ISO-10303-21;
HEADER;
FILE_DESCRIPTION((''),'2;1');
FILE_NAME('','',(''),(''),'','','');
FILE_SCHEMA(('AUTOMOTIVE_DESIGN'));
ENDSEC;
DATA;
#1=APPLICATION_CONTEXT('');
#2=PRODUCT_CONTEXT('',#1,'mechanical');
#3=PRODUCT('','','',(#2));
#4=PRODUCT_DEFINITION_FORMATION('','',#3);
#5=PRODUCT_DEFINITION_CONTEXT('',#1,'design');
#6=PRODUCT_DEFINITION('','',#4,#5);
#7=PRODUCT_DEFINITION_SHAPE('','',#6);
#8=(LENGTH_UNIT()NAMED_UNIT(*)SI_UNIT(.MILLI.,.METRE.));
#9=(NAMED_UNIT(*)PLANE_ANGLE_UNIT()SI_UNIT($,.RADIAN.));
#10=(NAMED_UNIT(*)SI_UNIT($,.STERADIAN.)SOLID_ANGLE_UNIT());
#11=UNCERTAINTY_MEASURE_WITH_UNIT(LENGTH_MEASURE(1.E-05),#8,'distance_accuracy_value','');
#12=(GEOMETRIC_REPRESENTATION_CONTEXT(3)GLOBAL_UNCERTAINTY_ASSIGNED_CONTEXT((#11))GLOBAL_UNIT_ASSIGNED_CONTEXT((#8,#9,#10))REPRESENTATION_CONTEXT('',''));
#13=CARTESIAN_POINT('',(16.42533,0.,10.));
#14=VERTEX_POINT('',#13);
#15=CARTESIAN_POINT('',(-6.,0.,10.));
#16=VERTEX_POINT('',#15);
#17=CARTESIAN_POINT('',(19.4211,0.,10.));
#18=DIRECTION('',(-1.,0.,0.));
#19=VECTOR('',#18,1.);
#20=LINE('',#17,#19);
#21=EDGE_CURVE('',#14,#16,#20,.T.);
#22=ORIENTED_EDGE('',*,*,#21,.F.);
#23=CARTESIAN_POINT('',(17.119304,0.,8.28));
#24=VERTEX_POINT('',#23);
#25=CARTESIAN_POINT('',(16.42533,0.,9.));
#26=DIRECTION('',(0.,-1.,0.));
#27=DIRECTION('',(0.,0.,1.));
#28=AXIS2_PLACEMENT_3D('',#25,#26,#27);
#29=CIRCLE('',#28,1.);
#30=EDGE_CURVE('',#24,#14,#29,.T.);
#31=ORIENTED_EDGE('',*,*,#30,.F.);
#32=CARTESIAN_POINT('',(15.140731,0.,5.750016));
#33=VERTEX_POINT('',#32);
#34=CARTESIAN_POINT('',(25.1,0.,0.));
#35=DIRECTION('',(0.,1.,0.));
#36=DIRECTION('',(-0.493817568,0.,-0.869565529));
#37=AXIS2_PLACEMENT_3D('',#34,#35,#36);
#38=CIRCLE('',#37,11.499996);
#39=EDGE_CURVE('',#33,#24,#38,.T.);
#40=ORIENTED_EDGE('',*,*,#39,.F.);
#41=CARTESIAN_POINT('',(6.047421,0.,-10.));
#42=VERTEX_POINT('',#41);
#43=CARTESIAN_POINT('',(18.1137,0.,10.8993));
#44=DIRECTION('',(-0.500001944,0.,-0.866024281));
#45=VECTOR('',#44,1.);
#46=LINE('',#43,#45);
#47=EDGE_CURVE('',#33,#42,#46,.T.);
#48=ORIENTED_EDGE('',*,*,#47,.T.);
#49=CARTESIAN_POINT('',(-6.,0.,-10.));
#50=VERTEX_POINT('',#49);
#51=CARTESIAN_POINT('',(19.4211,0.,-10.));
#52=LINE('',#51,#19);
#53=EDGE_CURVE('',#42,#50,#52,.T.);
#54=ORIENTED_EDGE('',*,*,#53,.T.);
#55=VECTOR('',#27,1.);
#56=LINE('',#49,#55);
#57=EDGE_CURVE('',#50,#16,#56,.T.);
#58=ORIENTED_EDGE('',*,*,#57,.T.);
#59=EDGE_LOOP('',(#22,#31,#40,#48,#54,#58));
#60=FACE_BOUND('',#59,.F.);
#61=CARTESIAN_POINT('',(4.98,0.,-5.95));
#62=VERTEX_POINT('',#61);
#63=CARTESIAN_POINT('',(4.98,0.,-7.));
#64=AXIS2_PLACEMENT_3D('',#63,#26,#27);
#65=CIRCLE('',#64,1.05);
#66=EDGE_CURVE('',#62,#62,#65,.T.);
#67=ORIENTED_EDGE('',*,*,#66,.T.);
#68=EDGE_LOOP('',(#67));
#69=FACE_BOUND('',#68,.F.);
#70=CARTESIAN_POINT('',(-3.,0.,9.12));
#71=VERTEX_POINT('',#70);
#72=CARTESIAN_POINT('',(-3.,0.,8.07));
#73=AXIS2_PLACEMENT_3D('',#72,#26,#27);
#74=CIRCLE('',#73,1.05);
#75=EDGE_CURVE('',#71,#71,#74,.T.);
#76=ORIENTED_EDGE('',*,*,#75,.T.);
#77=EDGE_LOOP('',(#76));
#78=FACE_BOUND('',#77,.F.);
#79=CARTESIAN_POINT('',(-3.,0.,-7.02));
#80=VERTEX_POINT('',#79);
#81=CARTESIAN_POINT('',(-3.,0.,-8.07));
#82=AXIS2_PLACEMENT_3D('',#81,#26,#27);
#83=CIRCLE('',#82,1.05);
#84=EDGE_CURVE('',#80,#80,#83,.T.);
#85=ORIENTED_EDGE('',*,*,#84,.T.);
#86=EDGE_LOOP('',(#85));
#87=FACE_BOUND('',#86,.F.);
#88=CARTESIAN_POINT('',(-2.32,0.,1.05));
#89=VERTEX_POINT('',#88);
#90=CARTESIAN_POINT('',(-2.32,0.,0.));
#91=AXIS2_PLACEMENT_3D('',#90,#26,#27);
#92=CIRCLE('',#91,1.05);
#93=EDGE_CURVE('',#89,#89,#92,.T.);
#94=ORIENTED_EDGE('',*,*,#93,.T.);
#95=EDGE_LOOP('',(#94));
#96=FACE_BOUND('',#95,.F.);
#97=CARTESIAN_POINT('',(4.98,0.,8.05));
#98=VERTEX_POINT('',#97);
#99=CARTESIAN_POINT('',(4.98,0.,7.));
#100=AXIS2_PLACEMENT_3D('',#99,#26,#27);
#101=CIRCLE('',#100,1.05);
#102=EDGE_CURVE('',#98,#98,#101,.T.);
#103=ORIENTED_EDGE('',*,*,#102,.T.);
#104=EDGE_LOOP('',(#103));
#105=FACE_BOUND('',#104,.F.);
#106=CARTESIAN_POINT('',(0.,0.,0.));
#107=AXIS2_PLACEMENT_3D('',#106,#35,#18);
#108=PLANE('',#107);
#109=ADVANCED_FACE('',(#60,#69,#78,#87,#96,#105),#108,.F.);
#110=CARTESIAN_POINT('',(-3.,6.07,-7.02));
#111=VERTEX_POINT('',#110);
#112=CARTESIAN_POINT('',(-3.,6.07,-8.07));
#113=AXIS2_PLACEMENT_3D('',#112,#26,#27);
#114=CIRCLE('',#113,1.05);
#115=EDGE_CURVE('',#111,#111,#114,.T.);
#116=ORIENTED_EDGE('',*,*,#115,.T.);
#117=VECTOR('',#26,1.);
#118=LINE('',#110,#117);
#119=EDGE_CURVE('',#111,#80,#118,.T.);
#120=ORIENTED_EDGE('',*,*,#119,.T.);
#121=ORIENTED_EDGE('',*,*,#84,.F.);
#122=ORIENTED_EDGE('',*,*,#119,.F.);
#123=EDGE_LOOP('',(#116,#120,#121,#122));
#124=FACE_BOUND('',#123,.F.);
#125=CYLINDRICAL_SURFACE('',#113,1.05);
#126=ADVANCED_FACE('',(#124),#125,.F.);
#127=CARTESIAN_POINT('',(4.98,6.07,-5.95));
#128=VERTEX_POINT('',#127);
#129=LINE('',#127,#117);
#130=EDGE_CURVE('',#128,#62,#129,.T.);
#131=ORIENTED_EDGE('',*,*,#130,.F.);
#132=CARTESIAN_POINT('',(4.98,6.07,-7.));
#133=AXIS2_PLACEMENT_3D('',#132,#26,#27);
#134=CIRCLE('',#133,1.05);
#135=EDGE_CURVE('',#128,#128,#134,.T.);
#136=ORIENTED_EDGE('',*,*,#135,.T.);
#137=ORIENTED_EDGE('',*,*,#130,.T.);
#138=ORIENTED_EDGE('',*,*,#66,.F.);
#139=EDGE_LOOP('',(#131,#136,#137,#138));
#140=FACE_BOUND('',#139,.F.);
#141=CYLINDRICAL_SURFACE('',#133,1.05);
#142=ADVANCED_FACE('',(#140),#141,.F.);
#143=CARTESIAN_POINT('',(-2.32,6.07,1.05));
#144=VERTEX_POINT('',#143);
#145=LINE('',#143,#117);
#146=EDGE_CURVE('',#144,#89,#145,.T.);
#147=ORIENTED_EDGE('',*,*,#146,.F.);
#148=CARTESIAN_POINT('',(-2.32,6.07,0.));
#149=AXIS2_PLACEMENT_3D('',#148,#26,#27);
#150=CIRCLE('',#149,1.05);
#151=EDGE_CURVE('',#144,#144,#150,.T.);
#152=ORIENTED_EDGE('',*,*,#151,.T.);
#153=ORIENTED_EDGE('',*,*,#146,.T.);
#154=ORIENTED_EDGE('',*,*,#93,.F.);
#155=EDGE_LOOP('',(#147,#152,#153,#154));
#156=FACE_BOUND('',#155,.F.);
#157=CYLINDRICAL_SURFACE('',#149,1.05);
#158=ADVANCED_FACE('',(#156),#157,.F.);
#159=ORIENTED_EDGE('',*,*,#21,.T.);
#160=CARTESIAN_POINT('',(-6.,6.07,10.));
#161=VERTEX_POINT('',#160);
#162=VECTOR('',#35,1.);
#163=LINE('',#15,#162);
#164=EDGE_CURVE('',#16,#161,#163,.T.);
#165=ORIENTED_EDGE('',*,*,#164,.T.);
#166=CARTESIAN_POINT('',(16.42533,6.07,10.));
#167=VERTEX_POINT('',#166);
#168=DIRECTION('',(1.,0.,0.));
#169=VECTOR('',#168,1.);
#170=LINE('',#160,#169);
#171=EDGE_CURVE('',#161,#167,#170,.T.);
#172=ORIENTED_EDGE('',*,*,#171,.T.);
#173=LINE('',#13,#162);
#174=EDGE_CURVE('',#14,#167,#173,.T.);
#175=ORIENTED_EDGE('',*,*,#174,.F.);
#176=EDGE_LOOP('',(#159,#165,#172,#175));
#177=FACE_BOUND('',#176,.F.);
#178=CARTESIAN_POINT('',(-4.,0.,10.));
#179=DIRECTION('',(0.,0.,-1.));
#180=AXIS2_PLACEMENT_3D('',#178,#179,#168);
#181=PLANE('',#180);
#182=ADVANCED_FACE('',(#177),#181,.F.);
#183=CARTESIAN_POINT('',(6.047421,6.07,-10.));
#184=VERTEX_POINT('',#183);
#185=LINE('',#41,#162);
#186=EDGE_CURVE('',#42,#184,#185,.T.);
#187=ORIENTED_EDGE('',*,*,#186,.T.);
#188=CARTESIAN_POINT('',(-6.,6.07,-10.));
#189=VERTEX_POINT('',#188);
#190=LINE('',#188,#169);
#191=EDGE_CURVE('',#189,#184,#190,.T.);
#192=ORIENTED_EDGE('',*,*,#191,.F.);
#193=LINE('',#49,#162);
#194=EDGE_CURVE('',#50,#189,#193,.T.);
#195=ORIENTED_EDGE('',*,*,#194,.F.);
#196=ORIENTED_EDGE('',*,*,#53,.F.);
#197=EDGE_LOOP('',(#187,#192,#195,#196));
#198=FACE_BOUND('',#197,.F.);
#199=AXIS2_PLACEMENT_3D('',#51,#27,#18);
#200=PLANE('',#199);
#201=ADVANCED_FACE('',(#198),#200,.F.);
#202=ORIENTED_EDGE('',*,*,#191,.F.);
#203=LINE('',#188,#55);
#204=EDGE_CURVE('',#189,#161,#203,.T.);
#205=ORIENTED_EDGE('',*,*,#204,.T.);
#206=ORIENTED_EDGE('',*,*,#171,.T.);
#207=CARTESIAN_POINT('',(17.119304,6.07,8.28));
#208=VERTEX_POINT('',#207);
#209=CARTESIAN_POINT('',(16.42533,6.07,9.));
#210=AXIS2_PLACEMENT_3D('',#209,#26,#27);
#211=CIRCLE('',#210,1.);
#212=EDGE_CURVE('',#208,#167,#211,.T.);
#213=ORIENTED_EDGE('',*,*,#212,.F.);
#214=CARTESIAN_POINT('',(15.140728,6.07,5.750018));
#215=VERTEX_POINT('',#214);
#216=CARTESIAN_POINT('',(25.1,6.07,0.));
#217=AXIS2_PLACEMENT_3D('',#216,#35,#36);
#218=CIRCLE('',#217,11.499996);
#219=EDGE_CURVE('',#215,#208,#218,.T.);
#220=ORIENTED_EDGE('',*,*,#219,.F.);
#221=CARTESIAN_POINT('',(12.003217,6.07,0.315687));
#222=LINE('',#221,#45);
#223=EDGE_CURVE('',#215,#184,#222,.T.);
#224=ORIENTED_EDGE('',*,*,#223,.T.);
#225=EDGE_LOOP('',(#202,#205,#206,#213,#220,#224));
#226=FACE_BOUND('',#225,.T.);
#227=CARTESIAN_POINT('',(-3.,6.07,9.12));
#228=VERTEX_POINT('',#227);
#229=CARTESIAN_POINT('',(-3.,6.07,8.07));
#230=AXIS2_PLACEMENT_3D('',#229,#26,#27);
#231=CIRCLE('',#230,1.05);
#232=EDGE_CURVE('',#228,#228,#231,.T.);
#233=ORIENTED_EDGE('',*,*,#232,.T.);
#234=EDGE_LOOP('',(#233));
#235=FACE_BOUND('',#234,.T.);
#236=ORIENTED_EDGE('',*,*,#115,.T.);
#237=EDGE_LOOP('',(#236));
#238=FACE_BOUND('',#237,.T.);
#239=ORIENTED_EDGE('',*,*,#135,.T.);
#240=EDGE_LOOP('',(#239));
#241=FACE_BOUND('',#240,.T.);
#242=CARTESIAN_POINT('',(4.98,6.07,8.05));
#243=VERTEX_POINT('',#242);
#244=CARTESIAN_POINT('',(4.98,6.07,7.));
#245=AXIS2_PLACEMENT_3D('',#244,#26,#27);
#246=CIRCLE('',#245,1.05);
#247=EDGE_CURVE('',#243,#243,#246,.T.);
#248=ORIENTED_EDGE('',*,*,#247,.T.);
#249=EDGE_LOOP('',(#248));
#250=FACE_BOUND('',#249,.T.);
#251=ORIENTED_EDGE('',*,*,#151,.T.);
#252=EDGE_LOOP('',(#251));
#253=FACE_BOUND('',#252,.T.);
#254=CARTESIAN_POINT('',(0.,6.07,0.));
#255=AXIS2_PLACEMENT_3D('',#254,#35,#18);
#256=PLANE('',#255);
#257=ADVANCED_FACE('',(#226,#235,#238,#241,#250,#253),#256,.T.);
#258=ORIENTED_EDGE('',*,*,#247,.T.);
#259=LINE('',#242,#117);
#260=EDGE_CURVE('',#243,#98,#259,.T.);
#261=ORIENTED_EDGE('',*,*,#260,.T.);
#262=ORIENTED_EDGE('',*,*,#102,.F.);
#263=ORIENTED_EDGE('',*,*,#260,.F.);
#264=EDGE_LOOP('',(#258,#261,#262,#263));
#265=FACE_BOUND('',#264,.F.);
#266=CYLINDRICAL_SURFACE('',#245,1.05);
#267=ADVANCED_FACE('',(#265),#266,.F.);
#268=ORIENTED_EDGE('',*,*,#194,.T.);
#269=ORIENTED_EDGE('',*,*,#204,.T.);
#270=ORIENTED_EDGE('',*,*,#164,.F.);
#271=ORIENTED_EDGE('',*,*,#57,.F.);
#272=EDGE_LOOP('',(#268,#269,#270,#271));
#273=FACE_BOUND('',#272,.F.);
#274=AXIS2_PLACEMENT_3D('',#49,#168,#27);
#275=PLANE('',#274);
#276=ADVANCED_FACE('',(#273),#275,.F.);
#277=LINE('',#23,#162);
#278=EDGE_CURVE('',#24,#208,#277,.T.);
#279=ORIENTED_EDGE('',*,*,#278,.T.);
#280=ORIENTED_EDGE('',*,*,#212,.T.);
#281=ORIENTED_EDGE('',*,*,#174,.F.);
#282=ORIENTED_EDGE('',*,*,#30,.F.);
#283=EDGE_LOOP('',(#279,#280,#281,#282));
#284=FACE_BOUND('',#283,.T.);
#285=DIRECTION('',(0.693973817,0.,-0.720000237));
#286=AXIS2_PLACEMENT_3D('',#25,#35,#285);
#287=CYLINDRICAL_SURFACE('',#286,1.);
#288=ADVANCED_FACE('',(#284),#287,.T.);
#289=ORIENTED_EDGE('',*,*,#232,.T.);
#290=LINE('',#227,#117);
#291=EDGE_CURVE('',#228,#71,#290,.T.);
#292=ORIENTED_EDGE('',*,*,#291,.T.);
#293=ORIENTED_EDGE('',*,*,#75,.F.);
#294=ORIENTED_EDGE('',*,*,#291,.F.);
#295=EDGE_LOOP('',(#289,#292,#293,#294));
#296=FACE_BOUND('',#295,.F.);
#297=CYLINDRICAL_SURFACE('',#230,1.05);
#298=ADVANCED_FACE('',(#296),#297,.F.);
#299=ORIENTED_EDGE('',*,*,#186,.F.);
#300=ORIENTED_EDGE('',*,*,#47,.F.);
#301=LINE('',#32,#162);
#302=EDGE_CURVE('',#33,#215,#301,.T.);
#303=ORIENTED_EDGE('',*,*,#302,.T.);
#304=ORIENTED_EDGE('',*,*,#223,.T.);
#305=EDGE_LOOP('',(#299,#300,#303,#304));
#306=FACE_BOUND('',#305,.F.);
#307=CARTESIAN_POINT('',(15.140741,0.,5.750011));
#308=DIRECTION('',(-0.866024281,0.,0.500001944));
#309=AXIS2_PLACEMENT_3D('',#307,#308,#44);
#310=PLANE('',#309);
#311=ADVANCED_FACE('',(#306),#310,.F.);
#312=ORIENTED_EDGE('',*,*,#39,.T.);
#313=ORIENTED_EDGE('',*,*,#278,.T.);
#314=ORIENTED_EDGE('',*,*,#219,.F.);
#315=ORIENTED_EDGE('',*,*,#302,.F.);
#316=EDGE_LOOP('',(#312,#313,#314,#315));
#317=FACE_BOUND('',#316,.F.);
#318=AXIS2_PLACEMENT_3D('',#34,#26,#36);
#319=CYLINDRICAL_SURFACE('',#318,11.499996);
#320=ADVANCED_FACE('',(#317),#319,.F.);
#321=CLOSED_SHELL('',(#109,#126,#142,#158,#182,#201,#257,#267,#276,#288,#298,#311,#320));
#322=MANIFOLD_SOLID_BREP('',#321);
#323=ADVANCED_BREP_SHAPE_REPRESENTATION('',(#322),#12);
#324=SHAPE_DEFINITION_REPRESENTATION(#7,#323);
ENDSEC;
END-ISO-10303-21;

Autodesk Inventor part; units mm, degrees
ref_plane "YZ Plane" through (0, 0, 0) normal (1, 0, 0) x (0, 1, 0)
ref_plane "XZ Plane" through (0, 0, 0) normal (0, 1, 0) x (-1, 0, 0)
ref_plane "XY Plane" through (0, 0, 0) normal (0, 0, 1) x (1, 0, 0)
sketch "Sketch1" plane through (0, 0, 0) normal (0, 1, 0) x (-1, 0, 0)
  line L0 (4, 10) -> (-19.4211, 10)
  line L1 (-19.4211, -10) -> (4, -10)
  line L2 (4, -10) -> (4, 10)
  arc A0 (-19.4211, -10) -> (-19.4211, 10) centre (-25.1, 0) ccw
  line L3 (4, -10) -> (6, -10)
  line L4 (6, -10) -> (6, 10)
  line L5 (6, 10) -> (4, 10)
  line L6 (4, 10) -> (4, -10)
  point P0 (0, 0)
  dimension "d0" = 20
  dimension "d2" = 4
  dimension "d3" = 10
  dimension "d6" = 10
  dimension "d7" = 23
  dimension "d8" = 29.1
  dimension "d11" = 23.4211
  dimension "d12" = 20
  dimension "d13" = 2
extrude "Extrusion1" add sketch "Sketch1" along normal blind 6.07
fillet "Fillet1" radius 1 2 edges at (19.4211, 3.035, 10) (19.4211, 3.035, -10)
sketch "Sketch2" plane through (0, 6.07, 0) normal (0, 1, 0) x (1, 0, 0)
  circle A0 centre (0.68, 0) radius 0.7835 projected
  circle A1 centre (7.98, -7) radius 0.7835 projected
  circle A2 centre (7.98, 7) radius 0.7835 projected
  circle A3 centre (0, -8.07) radius 0.7835 projected
  circle A4 centre (0, 8.07) radius 0.7835 projected
  circle A5 centre (-3, 8.07) radius 1.05
  circle A6 centre (4.98, 7) radius 1.05
  circle A7 centre (-2.32, 0) radius 1.05
  circle A8 centre (4.98, -7) radius 1.05
  circle A9 centre (-3, -8.07) radius 1.05
  point P0 (0, 0)
hole "Hole1" at (4.98, 6.07, 7) at (-2.32, 6.07, 0) at (-3, 6.07, 8.07) at (-3, 6.07, -8.07) at (4.98, 6.07, -7) direction (0, -1, 0) diameter 2.1 depth 7.07
sketch "Sketch3" plane through (0, 0, 0) normal (0, -1, 0) x (1, 0, 0)
  line L0 (18.1137, 10.8993) -> (3.779, -13.929)
  arc A0 (17.1193, 8.28) -> (17.1193, -8.28) centre (25.1, 0) ccw projected
  line L1 (16.4253, -10) -> (-6, -10) projected
  arc A1 (16.4253, -10) -> (17.1193, -8.28) centre (16.4253, -9) ccw projected
  point P0 (0, 0)
  point P1 (15.1407, 5.75)
  point P2 (6.0474, -10)
  dimension "d22" = 60
extrude "Extrusion2" cut sketch "Sketch3" against normal up to next
properties part number "3D_printed_part"
